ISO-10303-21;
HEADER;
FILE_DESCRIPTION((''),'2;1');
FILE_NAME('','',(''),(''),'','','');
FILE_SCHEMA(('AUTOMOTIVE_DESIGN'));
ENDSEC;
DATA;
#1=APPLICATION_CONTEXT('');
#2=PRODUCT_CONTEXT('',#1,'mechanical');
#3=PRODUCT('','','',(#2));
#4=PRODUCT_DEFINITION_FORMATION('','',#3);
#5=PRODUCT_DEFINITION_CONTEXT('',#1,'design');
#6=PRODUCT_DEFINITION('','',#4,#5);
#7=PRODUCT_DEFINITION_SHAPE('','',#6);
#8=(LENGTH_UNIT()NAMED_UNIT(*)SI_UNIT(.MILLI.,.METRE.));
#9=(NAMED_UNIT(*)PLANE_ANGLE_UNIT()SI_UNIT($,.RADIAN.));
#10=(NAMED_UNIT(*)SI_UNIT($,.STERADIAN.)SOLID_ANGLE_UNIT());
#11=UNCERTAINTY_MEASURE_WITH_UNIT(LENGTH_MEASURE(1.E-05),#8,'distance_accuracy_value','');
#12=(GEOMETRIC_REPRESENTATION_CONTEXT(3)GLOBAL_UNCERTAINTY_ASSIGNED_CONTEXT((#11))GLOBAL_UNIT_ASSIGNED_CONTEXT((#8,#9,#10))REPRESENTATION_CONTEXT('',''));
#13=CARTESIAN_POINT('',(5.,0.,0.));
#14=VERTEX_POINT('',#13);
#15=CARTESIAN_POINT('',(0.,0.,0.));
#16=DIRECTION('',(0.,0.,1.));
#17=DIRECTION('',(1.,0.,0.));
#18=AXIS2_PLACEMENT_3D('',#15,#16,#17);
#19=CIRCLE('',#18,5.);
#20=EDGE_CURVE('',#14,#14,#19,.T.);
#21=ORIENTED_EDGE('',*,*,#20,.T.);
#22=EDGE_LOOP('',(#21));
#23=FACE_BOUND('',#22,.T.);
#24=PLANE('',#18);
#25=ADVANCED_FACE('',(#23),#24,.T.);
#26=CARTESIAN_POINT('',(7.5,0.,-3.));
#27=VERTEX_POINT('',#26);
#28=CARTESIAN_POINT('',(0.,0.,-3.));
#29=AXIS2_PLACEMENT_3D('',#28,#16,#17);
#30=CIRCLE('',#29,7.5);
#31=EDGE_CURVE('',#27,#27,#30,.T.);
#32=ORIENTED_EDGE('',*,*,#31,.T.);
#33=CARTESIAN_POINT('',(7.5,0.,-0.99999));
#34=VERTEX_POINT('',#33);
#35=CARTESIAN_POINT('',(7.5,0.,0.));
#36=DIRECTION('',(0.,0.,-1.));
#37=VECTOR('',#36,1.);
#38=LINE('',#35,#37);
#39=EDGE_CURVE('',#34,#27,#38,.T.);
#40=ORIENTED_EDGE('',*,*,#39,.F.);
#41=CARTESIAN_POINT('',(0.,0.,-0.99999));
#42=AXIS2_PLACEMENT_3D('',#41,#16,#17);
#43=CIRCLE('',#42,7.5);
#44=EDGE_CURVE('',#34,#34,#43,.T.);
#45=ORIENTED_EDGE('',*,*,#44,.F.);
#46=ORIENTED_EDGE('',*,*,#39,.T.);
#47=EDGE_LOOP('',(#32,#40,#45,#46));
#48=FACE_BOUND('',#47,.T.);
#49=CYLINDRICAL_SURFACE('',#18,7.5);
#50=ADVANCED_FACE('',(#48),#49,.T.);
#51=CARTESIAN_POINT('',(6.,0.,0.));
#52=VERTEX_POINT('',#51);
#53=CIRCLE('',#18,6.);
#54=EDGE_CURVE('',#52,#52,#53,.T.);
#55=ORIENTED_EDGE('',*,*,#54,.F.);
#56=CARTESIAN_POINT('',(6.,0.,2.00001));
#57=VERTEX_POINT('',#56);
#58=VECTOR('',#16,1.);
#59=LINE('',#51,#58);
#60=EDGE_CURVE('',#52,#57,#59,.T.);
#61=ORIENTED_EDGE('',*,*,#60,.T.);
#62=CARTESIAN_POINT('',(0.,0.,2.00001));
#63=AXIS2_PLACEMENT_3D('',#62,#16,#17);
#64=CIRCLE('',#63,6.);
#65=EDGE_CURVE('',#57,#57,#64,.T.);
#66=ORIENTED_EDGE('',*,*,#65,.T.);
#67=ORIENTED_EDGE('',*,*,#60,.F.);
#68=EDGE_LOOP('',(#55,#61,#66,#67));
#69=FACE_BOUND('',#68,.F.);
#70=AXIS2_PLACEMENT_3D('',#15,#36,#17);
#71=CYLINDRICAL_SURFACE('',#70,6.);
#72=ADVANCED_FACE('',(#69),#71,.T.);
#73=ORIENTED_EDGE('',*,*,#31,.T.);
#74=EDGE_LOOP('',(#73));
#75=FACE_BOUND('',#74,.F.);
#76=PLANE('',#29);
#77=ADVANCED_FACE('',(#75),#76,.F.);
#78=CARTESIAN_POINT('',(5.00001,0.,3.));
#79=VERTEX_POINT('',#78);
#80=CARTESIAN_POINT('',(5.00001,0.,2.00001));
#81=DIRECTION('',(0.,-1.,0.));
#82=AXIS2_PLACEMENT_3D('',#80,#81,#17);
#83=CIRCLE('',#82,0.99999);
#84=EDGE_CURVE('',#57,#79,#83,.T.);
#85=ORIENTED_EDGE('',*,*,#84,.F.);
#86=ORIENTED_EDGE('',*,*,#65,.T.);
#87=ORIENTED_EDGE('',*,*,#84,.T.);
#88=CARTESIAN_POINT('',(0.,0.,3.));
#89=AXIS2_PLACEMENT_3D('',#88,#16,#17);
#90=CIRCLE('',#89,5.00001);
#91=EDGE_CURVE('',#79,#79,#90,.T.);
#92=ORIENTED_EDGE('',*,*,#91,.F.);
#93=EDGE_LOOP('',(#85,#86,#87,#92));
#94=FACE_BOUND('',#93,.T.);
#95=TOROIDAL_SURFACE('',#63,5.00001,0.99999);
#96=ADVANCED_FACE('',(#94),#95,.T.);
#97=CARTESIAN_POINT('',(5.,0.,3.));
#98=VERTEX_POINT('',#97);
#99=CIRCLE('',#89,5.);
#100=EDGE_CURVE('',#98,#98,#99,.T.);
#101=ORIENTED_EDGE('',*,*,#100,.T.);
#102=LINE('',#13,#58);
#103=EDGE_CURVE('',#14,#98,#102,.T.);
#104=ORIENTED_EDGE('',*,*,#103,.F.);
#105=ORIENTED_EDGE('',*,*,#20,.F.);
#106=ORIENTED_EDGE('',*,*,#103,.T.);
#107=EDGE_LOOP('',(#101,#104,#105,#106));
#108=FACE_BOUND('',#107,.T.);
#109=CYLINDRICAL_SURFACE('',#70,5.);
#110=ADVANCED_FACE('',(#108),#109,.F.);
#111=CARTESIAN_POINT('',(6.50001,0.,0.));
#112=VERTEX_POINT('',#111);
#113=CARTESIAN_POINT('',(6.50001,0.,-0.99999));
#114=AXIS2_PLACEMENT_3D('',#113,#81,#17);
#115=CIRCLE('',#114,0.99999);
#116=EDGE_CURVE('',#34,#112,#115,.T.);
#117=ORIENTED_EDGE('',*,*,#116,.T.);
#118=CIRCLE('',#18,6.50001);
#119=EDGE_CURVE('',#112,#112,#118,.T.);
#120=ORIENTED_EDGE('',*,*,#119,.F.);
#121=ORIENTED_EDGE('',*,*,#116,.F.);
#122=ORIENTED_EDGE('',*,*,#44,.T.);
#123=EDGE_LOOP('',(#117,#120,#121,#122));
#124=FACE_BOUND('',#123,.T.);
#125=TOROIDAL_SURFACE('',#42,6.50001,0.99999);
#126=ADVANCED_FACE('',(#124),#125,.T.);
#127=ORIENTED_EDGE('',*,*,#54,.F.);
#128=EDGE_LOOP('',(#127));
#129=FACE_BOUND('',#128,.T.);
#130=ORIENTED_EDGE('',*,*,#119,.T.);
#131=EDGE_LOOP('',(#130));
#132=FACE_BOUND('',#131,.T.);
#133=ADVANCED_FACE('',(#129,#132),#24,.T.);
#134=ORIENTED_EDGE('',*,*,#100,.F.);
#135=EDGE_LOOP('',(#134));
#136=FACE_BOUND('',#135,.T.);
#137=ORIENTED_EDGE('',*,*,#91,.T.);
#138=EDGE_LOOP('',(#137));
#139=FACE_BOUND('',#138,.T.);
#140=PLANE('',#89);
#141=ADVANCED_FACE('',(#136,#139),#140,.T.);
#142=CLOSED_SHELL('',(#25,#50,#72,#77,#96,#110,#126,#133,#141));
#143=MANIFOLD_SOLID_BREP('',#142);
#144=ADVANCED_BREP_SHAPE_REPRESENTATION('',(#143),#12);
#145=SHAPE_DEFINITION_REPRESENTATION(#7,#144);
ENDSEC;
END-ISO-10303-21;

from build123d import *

# Parameters (mm, degrees)
F0_R     = 7.5
F0_R_2   = 6
F0_R_3   = 5
F1_DEPTH = 3
F2_DEPTH = 3
F3_R     = 0.99999


# Not quite as in the source:
# - a fillet or chamfer is up to 0.001 mm smaller than in the source, because OpenCascade refuses the exact size


with BuildPart() as f1:
    # F0 (on Top) → F1 (new body)
    with BuildSketch(Plane.XY):
        Circle(F0_R)
        Circle(F0_R_2, mode=Mode.SUBTRACT)
        Circle(F0_R_2)
        Circle(F0_R_3, mode=Mode.SUBTRACT)
        Circle(F0_R_3)
    extrude(amount=-F1_DEPTH)

    # F0 (on Top) → F2 (join)
    with BuildSketch(Plane.XY):
        Circle(F0_R_2)
        Circle(F0_R_3, mode=Mode.SUBTRACT)
    extrude(amount=F2_DEPTH)

    # F3 (radius 1 in the source; OpenCascade refuses exactly that, so slightly less here)
    f3_edges = [f1.edges().sort_by_distance(p)[0] for p in [
        (-7.5, 0, 0),
        (-6, 0, 3),
    ]]
    fillet(f3_edges, radius=F3_R)


solid = f1.part
